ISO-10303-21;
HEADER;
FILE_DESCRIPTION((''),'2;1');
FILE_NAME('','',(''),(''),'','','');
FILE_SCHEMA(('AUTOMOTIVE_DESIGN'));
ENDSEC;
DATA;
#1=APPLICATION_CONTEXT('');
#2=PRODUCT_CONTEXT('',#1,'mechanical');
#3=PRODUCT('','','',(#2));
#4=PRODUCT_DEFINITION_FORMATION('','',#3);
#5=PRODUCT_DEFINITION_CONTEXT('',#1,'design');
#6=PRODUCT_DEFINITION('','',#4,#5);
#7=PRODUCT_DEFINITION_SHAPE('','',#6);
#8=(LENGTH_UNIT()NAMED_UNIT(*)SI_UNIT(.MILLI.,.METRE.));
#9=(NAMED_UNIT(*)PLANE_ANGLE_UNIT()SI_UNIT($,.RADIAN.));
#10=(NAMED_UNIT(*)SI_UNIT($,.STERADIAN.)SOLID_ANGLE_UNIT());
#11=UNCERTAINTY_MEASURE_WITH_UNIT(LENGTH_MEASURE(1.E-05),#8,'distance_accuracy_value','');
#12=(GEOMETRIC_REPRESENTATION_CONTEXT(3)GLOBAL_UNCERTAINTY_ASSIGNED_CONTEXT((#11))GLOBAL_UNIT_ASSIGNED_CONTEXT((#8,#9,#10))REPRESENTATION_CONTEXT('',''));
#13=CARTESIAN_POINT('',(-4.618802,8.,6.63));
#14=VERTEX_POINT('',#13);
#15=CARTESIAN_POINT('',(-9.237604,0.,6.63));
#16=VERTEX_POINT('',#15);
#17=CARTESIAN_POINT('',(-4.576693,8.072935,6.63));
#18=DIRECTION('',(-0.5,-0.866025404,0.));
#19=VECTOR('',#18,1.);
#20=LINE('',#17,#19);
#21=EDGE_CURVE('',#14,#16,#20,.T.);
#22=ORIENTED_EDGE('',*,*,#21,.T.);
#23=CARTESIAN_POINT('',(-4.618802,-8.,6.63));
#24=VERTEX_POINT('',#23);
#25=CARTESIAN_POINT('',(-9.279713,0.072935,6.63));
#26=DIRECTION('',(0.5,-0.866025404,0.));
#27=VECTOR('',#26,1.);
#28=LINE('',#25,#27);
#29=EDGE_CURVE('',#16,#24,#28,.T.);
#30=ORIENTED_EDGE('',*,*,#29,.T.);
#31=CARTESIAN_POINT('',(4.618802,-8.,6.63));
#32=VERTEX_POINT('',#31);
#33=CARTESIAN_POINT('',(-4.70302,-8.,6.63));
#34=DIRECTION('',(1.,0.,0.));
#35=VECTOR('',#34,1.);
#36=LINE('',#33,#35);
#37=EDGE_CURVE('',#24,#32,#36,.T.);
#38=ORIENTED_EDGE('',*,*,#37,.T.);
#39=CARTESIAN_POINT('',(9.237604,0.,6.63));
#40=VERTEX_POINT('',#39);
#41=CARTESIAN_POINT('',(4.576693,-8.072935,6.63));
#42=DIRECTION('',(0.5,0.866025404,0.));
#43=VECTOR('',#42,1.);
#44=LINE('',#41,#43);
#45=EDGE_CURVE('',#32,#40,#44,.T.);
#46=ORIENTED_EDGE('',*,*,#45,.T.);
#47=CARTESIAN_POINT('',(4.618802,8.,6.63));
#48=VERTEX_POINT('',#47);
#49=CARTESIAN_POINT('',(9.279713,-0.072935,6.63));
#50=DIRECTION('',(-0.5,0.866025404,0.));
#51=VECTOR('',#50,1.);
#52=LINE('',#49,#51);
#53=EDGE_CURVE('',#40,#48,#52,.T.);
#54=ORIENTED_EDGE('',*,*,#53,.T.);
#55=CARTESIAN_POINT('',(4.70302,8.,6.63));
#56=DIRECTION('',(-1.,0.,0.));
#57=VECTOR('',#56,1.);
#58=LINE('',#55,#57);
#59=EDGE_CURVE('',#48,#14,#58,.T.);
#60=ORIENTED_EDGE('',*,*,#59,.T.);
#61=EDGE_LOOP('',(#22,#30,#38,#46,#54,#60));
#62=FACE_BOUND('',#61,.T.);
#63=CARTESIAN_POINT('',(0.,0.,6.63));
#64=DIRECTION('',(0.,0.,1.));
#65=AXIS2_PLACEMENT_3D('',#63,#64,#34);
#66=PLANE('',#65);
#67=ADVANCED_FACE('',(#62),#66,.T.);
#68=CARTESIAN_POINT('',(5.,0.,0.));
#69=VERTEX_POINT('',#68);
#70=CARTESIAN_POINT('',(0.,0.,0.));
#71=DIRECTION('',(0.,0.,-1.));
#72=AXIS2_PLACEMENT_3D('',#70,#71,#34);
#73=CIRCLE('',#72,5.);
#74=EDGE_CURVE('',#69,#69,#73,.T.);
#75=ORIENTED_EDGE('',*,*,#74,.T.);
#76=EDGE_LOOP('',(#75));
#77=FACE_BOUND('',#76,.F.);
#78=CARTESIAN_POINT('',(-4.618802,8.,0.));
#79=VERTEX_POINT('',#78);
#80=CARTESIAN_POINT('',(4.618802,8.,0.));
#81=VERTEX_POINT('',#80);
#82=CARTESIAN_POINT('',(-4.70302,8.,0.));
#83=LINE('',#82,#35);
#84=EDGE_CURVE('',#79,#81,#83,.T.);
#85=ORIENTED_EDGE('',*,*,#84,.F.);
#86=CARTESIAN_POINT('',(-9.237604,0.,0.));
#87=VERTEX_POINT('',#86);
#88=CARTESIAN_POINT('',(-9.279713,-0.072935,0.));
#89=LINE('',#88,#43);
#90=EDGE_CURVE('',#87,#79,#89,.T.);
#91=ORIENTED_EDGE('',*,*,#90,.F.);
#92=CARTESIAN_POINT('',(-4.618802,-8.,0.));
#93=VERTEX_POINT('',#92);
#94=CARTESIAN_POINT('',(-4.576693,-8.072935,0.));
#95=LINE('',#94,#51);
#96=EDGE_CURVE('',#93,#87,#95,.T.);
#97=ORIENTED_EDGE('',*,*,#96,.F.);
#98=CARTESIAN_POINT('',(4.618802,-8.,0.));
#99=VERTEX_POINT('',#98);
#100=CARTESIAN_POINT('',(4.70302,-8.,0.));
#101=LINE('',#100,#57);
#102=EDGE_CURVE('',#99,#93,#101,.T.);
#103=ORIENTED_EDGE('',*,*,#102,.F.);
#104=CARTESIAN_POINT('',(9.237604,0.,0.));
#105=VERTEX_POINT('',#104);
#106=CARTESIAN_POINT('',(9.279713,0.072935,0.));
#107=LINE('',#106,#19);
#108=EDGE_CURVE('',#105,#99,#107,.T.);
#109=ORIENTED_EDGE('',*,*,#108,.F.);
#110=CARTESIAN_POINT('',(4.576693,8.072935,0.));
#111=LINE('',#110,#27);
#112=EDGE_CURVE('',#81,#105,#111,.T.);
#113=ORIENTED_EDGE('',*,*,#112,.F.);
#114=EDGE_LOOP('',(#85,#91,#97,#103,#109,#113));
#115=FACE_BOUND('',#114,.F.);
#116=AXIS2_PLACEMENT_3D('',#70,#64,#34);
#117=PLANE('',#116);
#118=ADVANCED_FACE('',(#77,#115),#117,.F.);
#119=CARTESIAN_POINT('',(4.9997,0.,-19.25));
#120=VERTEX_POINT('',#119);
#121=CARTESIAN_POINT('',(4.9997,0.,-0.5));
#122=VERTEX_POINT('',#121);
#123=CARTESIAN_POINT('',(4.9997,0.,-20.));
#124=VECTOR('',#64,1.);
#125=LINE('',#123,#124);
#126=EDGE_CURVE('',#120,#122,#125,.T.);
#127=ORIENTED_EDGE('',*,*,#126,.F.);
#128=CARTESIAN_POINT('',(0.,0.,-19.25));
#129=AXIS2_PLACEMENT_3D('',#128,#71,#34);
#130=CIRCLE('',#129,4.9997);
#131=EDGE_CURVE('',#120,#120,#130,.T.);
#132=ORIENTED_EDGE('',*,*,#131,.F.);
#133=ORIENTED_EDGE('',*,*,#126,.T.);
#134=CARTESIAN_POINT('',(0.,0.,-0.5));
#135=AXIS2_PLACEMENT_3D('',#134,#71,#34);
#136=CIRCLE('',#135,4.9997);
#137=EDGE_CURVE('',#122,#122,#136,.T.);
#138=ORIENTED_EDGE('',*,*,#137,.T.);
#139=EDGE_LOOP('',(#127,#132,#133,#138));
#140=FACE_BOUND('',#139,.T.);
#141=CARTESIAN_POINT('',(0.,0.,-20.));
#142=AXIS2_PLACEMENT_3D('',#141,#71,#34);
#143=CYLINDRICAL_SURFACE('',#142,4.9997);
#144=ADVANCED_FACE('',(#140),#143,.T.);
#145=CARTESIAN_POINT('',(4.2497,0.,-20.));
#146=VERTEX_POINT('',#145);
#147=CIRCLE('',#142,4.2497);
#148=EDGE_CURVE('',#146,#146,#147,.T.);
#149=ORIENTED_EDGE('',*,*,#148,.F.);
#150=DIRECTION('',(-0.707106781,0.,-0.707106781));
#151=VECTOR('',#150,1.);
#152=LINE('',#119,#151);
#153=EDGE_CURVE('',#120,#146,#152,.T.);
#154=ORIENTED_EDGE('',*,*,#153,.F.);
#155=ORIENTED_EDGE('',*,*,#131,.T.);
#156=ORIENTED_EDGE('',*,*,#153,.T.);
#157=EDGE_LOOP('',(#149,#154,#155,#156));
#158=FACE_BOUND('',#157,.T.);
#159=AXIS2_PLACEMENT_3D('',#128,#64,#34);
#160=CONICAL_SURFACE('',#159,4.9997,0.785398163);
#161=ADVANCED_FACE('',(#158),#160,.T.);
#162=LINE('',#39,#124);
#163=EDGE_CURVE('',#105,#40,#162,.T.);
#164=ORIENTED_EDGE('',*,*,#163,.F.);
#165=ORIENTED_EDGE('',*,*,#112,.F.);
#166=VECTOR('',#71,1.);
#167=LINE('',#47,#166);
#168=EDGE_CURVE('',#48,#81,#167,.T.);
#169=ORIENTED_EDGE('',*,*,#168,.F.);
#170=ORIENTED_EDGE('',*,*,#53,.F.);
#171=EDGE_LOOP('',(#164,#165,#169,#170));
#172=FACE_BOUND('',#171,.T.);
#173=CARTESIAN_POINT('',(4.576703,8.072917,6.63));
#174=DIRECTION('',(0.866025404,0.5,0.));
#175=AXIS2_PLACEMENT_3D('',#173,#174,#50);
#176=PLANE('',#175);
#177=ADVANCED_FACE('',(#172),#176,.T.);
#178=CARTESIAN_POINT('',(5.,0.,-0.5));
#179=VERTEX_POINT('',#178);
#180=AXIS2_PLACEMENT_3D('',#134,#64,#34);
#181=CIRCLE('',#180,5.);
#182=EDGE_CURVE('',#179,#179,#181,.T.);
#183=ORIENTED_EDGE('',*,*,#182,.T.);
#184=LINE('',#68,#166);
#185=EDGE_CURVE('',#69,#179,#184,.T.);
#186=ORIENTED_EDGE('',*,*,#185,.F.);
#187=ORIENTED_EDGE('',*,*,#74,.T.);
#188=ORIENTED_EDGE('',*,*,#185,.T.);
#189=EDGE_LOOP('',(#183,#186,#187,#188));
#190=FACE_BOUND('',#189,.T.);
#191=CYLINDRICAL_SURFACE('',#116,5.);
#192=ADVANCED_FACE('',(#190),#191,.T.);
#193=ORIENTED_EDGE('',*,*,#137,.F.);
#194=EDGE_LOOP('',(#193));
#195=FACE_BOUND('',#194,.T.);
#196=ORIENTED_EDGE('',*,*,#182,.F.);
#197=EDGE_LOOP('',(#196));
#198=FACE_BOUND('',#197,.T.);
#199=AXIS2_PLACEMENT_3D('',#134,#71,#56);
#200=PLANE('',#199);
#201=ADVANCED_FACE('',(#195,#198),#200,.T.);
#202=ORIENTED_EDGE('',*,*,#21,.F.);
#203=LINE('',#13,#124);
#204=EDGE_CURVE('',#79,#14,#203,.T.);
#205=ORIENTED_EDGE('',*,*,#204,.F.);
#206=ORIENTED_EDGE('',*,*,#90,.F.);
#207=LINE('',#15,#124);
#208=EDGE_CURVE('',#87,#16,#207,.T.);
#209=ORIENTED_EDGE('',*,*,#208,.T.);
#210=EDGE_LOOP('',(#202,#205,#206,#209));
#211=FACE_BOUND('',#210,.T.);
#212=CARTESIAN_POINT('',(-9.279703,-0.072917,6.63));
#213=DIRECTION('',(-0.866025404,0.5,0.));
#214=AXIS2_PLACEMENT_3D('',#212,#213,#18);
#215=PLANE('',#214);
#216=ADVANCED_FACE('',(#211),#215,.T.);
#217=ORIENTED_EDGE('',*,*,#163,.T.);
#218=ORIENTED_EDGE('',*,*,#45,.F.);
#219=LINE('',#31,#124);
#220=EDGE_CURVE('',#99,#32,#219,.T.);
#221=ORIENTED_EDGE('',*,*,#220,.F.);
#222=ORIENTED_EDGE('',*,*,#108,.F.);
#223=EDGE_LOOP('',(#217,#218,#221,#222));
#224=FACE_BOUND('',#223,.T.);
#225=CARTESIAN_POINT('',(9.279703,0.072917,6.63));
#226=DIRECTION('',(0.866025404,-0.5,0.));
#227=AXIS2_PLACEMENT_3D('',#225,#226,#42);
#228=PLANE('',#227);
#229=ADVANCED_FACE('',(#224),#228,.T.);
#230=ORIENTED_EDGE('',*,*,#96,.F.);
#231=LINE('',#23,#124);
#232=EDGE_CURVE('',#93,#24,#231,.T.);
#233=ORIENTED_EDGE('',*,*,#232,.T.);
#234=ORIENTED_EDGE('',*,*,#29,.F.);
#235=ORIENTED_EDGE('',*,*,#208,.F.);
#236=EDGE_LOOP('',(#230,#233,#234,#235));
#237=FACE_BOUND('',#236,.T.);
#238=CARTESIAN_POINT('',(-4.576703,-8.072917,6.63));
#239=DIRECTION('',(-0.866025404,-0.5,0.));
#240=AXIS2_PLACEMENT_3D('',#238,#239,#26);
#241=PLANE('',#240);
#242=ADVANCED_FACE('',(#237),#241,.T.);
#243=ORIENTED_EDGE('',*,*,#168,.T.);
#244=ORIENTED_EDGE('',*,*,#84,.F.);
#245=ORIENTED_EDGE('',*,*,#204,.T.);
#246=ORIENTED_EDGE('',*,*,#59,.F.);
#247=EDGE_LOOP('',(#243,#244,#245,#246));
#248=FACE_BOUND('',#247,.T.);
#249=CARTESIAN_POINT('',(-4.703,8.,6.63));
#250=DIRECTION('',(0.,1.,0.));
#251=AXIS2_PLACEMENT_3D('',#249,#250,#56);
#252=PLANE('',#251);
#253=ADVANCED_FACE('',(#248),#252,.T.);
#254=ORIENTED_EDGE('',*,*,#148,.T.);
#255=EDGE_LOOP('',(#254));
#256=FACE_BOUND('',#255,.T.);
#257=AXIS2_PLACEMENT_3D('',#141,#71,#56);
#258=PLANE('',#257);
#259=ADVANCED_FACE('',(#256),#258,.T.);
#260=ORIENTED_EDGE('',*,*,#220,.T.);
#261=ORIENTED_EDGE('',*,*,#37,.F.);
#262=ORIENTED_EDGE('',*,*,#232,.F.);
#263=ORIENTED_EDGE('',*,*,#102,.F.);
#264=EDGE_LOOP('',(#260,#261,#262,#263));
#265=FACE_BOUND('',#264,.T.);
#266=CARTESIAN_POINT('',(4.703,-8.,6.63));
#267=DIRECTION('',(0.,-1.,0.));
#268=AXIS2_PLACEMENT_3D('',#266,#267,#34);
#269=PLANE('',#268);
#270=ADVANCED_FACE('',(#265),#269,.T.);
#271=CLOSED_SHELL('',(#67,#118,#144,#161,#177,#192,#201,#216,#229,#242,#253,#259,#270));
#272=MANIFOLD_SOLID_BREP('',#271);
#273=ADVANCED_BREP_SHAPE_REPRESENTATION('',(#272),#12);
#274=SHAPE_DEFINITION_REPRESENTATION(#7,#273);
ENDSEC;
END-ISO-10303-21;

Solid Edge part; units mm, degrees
sketch "Sketch1" plane through (0, 0, 0) normal (0, 0, 1) x (1, 0, 0)
  circle A0 centre (0, 0) radius 9.28
  dimension "D1" = 18.56
extrude "Protrusion1" add sketch "Sketch1" along normal blind 6.63
sketch "Sketch2" plane through (0, 0, 0) normal (0, 0, -1) x (1, 0, 0)
  circle A0 centre (0, 0) radius 5
extrude "Protrusion2" add sketch "Sketch2" along normal blind 20
sketch "Sketch3" plane through (0, 0, -20) normal (0, 0, -1) x (1, 0, 0)
  circle A0 centre (0, 0) radius 4.9997
extrude "Cutout1" cut sketch "Sketch3" against normal blind 19.5 flip side to cut
chamfer "Chamfer_1" distance 0.75 angle 45 1 edges at (-4.9997, 0, -20)
sketch "Sketch4" plane through (0, 0, 6.63) normal (0, 0, 1) x (1, 0, 0)
  line L0 (-4.703, 8) -> (4.703, 8)
  dimension "D1" = 16
extrude "Cutout2" cut sketch "Sketch4" against normal up to next material side at (0, 8.05, 6.63)
pattern_circular "Pattern1" count 6 over 360 about axis through (0, 0, 6.63) along (0, 0, 1) of "Cutout2"
properties part number "24104769"
